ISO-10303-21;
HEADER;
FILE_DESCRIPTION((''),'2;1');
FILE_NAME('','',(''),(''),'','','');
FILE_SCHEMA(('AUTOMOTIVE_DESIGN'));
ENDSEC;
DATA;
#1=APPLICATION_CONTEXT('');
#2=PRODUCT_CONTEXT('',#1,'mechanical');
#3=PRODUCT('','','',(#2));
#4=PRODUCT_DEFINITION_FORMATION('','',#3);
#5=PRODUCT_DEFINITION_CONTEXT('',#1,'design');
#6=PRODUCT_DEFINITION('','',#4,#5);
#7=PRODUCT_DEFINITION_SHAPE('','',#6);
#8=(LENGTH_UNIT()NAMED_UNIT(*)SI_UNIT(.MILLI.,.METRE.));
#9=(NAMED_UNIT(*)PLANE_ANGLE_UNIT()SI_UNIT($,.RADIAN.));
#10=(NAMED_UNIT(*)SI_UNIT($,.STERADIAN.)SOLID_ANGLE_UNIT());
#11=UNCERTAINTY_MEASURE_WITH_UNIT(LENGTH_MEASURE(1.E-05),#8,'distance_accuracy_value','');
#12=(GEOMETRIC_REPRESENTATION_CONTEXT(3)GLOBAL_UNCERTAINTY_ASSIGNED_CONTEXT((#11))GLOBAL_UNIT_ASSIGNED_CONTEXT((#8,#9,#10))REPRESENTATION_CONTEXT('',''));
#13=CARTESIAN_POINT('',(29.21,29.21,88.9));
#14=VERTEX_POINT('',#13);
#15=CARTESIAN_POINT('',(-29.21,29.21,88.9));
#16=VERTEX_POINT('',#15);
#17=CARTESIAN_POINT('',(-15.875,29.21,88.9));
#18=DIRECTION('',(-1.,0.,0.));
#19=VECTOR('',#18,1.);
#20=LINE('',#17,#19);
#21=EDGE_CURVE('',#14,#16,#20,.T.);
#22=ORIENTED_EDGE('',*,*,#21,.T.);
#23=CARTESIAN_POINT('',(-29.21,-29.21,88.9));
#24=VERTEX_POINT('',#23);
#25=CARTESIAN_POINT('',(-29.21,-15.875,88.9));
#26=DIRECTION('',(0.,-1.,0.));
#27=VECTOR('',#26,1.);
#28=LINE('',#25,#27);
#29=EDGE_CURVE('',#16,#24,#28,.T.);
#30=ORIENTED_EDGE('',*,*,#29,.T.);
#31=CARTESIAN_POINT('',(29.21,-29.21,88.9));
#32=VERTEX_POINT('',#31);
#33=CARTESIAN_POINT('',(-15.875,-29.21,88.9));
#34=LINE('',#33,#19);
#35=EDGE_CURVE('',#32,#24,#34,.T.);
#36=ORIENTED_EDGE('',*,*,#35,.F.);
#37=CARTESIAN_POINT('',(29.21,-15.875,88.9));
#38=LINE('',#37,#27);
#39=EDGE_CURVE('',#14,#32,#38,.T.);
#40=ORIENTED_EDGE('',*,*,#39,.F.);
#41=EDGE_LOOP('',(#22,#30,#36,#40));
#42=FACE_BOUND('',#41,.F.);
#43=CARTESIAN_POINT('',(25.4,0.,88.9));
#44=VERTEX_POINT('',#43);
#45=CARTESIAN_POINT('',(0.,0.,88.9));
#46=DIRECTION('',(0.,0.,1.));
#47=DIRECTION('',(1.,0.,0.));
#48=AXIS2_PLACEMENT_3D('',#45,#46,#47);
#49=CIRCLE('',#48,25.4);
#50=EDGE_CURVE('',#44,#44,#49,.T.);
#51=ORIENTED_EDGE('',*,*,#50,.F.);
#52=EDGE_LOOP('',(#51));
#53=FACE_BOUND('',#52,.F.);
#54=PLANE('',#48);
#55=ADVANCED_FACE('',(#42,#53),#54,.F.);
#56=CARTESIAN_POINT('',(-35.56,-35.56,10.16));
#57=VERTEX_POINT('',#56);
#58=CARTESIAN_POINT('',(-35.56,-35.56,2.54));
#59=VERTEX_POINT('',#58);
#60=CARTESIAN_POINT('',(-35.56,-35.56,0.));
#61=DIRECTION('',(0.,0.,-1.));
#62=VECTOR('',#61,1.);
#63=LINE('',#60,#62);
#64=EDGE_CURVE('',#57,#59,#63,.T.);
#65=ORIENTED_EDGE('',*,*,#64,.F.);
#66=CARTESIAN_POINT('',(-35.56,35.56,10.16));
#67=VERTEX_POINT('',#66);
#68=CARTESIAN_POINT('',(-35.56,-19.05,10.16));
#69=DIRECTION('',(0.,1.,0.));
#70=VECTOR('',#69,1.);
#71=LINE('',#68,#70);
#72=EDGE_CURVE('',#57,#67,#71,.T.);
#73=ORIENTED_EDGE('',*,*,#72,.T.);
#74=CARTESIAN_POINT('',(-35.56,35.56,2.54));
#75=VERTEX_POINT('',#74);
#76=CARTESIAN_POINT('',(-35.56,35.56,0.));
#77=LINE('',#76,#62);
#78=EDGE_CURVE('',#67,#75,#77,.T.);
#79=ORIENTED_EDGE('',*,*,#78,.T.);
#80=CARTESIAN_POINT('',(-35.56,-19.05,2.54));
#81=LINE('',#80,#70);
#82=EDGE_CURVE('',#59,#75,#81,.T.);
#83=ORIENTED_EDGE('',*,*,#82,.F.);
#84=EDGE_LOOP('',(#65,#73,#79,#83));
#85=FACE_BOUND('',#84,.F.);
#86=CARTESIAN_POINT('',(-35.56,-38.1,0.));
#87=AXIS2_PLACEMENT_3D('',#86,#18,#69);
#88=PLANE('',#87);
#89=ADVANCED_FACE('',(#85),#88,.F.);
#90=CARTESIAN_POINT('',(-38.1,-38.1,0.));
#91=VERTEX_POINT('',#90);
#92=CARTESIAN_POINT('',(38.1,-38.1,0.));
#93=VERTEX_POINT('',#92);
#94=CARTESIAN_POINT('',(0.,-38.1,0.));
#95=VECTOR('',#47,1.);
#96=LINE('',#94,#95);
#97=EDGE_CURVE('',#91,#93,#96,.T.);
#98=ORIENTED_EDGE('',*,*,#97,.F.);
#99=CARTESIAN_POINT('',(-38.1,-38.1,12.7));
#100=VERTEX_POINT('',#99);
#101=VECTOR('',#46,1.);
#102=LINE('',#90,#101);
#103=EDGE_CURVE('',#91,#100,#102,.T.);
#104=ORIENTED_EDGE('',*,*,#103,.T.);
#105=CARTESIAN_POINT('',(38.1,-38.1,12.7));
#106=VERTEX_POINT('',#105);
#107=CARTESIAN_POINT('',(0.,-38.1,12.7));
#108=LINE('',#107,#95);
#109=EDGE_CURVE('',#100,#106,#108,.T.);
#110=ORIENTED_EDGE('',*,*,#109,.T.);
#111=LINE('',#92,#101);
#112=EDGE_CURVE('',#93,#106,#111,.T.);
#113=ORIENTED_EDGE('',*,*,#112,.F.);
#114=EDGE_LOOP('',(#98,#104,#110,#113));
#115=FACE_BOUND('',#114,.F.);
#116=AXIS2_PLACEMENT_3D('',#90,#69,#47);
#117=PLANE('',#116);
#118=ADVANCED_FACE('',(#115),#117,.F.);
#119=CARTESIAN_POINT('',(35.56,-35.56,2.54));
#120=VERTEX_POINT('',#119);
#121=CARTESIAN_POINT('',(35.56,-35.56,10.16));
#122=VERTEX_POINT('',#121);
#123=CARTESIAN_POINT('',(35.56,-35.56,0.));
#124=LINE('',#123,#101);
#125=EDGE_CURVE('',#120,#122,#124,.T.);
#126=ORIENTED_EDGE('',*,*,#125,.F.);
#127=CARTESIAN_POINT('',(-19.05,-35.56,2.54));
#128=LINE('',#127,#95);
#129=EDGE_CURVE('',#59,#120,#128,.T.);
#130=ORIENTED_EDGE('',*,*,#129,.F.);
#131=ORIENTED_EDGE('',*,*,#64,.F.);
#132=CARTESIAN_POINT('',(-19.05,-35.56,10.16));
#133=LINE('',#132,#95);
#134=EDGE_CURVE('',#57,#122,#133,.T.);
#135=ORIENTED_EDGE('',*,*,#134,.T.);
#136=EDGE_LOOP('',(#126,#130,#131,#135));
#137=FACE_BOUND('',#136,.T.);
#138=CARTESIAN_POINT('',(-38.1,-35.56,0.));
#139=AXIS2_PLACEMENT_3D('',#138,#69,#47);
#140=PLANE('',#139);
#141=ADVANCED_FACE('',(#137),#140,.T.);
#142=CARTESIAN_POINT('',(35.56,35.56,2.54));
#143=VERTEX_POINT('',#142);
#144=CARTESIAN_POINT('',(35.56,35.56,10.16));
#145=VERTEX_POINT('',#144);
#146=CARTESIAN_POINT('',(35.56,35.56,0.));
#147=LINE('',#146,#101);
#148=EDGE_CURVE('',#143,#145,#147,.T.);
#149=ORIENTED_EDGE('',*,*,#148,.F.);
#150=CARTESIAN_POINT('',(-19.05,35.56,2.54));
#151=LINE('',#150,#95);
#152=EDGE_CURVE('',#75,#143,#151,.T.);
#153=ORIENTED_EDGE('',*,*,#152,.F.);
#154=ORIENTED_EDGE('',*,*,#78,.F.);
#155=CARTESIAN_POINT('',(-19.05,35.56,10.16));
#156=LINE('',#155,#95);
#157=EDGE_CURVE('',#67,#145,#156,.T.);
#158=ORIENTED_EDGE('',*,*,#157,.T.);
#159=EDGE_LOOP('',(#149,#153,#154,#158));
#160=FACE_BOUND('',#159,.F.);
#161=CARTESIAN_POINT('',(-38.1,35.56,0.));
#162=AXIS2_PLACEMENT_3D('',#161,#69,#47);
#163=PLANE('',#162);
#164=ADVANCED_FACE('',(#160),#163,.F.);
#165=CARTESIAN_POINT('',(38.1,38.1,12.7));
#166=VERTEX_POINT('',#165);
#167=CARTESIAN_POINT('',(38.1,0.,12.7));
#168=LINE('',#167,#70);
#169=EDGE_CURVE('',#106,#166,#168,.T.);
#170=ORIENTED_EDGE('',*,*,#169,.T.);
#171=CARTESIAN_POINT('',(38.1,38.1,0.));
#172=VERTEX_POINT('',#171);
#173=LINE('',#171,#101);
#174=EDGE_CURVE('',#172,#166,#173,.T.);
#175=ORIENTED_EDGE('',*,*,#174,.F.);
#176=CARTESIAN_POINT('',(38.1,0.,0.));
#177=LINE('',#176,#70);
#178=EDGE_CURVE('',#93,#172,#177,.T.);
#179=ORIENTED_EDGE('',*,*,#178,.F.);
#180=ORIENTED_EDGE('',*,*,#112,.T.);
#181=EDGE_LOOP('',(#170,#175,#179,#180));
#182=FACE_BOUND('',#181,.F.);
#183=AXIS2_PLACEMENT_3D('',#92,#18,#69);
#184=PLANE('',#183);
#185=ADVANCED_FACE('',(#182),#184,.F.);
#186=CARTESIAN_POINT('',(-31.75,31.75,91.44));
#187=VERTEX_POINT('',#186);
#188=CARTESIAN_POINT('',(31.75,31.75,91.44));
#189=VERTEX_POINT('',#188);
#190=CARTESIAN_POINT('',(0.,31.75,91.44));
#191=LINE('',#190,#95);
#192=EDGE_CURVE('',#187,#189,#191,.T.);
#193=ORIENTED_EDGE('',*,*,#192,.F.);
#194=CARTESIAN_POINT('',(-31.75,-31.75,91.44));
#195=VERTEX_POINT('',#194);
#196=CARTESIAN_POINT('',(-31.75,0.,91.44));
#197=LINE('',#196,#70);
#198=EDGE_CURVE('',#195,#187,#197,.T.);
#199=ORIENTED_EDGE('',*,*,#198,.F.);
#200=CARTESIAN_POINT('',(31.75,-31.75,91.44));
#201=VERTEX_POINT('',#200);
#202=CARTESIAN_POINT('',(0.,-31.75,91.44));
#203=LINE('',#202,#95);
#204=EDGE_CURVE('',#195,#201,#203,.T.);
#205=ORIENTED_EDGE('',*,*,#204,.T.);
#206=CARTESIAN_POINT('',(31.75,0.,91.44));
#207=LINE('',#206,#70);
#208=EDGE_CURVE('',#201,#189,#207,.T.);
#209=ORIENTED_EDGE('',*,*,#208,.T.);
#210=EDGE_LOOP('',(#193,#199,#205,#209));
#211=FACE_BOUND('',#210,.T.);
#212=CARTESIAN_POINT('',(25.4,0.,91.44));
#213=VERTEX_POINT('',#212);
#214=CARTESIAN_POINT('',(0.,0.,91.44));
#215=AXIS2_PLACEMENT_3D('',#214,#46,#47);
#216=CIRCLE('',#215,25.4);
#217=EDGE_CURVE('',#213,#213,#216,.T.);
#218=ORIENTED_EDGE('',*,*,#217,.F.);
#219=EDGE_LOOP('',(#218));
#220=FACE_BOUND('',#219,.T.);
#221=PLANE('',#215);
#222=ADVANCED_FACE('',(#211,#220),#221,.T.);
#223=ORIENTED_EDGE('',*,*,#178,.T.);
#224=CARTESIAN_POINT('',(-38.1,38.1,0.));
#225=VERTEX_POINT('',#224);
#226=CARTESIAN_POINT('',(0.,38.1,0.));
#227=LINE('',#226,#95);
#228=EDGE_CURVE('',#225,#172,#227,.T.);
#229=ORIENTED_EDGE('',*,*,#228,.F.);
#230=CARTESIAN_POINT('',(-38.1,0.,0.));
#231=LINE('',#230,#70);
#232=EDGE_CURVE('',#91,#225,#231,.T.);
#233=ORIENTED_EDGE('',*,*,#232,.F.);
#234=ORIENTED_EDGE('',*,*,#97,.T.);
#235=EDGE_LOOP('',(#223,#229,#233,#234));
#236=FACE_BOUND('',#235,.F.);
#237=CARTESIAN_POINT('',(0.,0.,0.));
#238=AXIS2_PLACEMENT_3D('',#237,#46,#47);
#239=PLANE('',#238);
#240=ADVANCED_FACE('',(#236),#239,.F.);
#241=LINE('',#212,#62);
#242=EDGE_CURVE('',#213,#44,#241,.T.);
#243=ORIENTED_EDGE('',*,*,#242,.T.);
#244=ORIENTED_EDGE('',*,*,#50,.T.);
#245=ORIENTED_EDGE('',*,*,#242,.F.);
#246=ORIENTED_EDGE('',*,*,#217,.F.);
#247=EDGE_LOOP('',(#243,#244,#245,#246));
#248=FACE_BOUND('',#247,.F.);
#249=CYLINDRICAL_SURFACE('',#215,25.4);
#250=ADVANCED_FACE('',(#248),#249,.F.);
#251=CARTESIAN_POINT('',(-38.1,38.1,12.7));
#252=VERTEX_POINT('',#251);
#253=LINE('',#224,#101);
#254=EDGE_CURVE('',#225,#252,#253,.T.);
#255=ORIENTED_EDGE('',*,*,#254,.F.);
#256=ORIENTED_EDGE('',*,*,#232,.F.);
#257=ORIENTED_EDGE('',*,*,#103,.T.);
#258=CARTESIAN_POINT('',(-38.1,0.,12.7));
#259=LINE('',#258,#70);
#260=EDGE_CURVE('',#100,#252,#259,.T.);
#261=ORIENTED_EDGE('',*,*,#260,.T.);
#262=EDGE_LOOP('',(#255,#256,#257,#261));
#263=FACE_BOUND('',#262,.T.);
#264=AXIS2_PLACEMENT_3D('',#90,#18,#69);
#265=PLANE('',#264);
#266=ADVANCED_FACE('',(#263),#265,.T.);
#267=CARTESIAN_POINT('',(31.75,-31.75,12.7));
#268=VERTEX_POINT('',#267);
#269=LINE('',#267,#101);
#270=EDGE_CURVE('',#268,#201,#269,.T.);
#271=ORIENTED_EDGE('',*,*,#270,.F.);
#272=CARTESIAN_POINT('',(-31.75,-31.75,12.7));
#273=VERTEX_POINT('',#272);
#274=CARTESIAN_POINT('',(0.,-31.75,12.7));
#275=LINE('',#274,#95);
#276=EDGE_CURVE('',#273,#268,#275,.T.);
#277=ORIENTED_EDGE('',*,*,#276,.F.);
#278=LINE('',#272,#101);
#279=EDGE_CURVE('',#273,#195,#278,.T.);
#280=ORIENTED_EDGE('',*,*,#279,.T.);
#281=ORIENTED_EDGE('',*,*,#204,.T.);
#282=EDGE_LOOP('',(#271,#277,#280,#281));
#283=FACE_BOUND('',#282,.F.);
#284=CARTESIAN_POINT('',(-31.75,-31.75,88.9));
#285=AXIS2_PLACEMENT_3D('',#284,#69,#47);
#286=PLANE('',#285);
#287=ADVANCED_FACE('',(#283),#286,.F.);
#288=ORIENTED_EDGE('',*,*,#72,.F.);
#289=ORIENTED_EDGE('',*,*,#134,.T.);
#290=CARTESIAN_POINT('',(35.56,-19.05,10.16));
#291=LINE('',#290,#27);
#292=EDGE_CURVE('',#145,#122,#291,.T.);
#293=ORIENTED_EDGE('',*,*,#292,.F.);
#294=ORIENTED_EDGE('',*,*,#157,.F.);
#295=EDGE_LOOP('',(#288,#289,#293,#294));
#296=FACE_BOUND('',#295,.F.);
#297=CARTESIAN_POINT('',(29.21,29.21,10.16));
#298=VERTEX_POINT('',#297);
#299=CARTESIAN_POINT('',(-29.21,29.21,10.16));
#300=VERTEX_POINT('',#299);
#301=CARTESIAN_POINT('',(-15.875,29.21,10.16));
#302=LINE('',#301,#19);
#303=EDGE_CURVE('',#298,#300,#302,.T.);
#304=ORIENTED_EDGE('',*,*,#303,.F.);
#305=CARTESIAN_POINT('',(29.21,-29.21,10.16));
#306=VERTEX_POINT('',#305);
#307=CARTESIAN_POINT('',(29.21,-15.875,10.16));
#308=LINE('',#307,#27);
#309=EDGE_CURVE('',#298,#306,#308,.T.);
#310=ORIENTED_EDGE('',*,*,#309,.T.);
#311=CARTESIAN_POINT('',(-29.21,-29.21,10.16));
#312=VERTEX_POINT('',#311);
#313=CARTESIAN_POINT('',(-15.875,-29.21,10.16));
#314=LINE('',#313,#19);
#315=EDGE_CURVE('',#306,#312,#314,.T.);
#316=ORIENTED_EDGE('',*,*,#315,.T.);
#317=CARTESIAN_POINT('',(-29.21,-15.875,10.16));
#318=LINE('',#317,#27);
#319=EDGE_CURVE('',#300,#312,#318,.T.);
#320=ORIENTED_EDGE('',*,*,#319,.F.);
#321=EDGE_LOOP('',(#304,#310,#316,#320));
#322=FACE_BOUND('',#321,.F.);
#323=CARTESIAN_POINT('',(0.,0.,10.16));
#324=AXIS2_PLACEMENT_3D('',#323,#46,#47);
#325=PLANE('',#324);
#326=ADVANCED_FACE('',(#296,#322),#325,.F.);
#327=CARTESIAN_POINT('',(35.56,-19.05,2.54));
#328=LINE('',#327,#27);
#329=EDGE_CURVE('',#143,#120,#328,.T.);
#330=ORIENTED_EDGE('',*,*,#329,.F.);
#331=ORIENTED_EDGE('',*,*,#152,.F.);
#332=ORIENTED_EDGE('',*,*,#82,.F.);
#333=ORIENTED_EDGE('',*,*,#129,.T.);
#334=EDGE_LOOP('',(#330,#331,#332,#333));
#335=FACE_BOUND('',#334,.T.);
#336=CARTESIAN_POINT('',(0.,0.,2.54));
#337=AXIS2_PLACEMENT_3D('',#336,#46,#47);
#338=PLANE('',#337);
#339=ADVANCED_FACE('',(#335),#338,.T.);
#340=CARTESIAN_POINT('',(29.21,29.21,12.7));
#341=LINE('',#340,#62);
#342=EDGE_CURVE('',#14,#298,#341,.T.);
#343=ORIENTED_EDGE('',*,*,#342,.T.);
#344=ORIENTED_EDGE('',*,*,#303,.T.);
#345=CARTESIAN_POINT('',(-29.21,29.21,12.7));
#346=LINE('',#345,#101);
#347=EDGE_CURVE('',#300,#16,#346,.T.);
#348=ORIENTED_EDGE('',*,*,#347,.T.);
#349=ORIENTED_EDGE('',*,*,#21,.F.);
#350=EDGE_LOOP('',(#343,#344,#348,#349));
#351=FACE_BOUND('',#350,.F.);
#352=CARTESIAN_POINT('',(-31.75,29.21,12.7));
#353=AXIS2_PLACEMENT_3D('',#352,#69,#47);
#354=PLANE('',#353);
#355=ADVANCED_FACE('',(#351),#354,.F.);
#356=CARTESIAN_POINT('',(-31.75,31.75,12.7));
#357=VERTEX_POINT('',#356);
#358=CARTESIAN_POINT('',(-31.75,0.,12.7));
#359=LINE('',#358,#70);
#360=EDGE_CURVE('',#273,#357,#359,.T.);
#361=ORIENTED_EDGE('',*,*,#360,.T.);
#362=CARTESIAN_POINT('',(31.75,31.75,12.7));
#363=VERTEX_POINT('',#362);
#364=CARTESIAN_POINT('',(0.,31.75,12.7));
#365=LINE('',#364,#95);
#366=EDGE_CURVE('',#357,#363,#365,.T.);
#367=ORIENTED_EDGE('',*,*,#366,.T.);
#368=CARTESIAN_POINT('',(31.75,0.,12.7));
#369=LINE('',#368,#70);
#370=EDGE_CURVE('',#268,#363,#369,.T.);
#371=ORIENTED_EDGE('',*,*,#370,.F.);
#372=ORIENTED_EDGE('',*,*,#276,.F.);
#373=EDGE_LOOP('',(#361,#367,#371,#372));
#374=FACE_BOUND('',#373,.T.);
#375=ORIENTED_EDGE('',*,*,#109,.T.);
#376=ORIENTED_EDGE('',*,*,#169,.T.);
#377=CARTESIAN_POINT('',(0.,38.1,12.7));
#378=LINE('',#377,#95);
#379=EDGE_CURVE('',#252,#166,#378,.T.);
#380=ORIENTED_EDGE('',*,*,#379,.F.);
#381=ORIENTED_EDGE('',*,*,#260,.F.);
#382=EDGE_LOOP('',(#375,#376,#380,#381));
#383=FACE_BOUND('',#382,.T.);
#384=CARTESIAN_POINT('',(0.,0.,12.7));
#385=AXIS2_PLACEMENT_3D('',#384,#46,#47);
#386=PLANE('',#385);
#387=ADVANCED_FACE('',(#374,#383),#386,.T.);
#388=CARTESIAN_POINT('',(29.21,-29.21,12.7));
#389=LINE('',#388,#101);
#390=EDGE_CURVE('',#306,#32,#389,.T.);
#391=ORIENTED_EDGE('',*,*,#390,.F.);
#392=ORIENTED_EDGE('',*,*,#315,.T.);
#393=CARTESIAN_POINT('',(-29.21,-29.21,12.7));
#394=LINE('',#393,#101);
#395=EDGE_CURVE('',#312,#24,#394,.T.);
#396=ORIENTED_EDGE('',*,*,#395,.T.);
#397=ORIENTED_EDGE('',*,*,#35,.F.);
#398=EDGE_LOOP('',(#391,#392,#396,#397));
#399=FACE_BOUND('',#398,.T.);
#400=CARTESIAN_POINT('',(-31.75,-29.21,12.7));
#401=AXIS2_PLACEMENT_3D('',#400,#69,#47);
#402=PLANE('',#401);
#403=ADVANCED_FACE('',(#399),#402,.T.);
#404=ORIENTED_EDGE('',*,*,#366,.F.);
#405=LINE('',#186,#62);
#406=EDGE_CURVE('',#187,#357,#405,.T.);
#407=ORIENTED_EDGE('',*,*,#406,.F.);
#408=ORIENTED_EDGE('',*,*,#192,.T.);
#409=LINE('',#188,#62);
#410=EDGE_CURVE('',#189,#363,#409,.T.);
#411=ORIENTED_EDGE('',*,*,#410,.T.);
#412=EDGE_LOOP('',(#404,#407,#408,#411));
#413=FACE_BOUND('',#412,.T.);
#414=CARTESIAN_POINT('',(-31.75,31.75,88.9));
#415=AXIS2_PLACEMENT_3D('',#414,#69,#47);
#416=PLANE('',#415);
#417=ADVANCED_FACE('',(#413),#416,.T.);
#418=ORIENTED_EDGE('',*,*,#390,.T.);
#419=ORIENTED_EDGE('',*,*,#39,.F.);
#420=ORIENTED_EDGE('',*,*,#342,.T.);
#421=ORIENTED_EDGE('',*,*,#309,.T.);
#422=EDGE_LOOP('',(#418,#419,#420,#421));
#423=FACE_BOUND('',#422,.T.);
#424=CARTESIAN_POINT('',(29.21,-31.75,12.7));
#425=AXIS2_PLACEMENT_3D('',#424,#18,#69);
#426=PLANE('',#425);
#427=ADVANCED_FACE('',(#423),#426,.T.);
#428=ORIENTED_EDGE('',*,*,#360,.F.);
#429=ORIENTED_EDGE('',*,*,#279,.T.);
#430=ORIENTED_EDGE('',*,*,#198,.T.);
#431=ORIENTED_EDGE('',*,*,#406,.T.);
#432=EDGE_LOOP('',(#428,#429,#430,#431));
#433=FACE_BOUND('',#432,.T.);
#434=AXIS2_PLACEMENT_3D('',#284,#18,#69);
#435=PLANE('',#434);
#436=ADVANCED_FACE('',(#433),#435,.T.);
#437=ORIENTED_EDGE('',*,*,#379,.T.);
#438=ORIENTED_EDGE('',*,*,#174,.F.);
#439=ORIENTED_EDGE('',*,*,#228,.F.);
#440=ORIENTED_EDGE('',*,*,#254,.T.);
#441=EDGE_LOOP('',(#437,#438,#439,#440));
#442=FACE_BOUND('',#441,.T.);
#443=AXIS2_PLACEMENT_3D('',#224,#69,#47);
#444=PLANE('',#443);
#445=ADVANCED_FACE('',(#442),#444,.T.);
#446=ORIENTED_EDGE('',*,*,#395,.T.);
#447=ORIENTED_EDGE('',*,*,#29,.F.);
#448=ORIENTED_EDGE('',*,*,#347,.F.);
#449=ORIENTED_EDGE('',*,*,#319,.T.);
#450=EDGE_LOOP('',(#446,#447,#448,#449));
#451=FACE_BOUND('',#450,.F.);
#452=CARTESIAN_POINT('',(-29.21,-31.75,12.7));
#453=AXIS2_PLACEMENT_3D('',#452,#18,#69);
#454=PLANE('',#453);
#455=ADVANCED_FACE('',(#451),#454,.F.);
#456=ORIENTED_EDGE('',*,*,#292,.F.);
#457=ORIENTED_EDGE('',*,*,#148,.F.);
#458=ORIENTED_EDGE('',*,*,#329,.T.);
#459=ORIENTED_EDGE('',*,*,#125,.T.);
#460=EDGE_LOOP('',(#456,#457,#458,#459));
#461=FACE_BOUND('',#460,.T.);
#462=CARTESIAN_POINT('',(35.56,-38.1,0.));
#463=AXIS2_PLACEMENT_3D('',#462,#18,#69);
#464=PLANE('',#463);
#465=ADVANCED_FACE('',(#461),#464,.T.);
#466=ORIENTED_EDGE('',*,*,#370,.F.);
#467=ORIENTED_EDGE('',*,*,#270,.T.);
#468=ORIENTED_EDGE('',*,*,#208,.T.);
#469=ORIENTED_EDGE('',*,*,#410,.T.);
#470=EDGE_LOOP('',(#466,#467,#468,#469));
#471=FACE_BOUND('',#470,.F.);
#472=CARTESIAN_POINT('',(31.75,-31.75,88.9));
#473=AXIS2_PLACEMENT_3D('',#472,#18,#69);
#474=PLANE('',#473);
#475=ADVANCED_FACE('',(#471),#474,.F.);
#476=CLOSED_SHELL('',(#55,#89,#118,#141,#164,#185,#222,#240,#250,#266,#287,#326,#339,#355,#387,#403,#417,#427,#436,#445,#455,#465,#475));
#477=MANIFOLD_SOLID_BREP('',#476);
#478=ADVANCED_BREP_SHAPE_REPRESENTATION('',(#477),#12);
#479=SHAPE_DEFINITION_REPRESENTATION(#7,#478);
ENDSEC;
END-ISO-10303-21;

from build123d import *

# Parameters (mm, degrees)
F0_W      = 76.2
F0_H      = 76.2
F1_DEPTH  = 12.7
F2_W      = 63.5
F2_H      = 63.5
F3_DEPTH  = 76.2
F6_T      = -2.54
F7_W      = 63.5
F7_H      = 63.5
F8_DEPTH  = 2.54
F9_R      = 25.4
F10_DEPTH = 25.4


# Not quite as in the source:
# - a feature of the source that left no trace in its solid (it failed there, or was rolled back) is left out


with BuildPart() as f1:
    # F0 (on Top) → F1 (new body)
    with BuildSketch(Plane.XY):
        Rectangle(F0_W, F0_H)
    extrude(amount=F1_DEPTH)

    # F2 (on face) → F3 (join)
    with BuildSketch(Plane.XY.offset(12.7)):
        Rectangle(F2_W, F2_H)
    extrude(amount=F3_DEPTH)

    # F6
    f6_openings = [f1.faces().sort_by_distance(p)[0] for p in [
        (0, 0, 88.9),
    ]]
    offset(amount=F6_T, openings=f6_openings, kind=Kind.INTERSECTION)

    # F7 (on face) → F8 (join)
    with BuildSketch(Plane.XY.offset(88.9)):
        Rectangle(F7_W, F7_H)
    extrude(amount=F8_DEPTH)

    # F9 (on face) → F10 (cut)
    with BuildSketch(Plane.XY.offset(91.44)):
        Circle(F9_R)
    extrude(amount=-F10_DEPTH, mode=Mode.SUBTRACT)


solid = f1.part
